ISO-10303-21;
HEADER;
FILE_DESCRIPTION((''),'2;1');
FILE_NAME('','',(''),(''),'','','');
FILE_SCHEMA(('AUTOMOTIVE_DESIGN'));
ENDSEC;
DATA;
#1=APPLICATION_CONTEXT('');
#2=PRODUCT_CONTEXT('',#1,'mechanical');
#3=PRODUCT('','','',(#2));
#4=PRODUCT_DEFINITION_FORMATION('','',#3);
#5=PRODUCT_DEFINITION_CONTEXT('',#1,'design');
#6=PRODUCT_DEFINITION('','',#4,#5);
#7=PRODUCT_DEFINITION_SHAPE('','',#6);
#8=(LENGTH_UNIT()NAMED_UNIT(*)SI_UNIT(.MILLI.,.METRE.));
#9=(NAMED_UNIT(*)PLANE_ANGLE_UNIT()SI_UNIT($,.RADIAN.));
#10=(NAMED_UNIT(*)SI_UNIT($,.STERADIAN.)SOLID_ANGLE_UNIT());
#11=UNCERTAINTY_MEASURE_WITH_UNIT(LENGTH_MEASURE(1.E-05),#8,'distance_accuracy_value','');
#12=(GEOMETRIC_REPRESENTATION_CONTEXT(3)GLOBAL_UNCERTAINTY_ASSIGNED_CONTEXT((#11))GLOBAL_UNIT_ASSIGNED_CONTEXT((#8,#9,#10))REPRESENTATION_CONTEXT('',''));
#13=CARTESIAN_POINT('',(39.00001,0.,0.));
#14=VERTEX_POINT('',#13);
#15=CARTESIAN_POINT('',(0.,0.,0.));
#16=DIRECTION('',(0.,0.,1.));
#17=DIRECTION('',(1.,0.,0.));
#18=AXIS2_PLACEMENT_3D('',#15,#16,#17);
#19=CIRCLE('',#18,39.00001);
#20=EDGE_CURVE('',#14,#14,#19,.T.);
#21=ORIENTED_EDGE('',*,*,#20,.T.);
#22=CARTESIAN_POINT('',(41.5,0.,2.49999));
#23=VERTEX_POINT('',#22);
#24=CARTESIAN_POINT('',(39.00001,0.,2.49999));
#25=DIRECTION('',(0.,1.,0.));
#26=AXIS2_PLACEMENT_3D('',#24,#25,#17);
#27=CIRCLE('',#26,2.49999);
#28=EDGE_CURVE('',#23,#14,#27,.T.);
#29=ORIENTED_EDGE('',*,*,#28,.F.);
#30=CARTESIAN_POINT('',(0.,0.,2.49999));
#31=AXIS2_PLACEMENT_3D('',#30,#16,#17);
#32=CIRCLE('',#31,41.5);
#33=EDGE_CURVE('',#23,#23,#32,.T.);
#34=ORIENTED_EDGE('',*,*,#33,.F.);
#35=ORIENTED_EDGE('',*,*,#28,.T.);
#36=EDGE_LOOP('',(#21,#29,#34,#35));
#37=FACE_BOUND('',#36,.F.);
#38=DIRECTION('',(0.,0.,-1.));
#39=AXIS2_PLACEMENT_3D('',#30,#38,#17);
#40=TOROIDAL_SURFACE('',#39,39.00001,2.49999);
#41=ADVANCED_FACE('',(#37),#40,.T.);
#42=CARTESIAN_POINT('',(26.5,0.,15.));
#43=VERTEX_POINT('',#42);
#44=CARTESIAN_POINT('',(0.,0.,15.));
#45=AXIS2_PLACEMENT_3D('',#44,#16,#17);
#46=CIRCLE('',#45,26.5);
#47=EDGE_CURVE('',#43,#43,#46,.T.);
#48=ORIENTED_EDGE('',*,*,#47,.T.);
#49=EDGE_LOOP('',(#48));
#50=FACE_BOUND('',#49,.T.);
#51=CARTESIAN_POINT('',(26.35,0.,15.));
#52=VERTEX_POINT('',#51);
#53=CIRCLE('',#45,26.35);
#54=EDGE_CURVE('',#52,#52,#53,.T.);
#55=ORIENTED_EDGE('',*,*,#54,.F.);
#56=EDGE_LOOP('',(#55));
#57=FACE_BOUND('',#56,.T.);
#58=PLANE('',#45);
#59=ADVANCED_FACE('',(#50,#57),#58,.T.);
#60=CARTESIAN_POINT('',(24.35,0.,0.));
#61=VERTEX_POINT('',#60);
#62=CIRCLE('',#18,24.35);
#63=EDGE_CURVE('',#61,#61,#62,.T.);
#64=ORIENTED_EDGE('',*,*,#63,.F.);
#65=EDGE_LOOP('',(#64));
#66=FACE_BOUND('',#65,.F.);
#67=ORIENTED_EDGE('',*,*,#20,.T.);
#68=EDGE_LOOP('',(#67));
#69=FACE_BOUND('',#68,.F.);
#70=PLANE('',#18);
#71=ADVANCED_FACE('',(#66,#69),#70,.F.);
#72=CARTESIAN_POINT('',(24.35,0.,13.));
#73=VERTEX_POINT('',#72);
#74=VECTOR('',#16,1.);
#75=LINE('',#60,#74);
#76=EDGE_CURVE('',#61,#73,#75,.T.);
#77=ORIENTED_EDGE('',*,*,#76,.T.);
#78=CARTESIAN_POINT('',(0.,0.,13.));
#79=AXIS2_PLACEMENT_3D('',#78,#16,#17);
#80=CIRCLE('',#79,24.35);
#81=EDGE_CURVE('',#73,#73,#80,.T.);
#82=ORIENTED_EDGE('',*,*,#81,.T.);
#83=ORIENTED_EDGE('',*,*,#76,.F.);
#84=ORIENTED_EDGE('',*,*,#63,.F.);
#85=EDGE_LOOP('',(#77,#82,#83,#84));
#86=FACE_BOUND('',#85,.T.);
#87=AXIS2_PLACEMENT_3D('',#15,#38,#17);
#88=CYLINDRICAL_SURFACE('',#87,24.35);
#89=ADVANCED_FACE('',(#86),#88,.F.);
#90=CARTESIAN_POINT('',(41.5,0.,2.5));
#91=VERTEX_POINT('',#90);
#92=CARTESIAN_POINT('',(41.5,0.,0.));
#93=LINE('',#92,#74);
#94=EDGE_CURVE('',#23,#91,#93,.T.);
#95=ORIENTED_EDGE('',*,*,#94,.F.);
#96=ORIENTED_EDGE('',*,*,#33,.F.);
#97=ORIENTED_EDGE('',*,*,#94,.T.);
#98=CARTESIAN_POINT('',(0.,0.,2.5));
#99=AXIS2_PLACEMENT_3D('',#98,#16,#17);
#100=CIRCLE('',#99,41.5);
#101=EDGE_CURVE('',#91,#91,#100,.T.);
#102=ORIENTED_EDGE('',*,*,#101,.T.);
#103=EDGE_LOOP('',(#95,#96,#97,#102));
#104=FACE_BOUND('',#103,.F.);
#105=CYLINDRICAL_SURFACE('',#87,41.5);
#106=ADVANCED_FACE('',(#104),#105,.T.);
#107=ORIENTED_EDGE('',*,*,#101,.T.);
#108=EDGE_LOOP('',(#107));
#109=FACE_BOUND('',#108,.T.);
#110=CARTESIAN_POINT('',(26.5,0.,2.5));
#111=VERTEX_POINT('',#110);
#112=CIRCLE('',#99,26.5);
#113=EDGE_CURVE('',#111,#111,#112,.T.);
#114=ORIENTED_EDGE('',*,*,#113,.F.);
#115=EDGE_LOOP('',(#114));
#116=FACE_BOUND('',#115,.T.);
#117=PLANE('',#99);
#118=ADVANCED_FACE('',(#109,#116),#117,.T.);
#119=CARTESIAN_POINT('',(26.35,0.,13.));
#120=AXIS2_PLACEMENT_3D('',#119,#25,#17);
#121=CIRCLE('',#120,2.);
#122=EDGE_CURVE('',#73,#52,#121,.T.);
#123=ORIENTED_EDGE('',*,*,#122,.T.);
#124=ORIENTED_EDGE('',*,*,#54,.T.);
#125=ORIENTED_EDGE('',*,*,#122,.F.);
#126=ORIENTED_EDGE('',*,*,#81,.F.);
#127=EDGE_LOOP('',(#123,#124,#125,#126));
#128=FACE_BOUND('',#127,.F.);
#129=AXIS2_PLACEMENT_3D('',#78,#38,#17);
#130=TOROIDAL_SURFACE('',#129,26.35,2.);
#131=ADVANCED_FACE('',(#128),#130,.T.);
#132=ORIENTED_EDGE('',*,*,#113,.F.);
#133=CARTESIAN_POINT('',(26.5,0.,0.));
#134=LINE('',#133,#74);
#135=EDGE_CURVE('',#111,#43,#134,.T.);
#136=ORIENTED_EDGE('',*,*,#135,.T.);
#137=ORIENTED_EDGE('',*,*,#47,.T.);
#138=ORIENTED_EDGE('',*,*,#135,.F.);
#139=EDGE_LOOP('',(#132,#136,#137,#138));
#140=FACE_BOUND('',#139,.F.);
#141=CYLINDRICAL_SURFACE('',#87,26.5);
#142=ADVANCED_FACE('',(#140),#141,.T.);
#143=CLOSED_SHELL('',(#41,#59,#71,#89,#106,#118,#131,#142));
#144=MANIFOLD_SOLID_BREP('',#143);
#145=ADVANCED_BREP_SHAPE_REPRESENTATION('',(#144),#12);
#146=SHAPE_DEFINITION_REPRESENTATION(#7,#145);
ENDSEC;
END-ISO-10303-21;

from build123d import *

# Parameters (mm, degrees)
F0_R     = 41.5
F0_R_2   = 26.5
F1_DEPTH = 2.5
F0_R_3   = 24.35
F2_DEPTH = 15
F3_R     = 2.49999
F4_R     = 2


# Not quite as in the source:
# - a fillet or chamfer is up to 0.001 mm smaller than in the source, because OpenCascade refuses the exact size


with BuildPart() as f1:
    # F0 (on Top) → F1 (new body)
    with BuildSketch(Plane.XY):
        Circle(F0_R)
        Circle(F0_R_2, mode=Mode.SUBTRACT)
    extrude(amount=F1_DEPTH)

    # F0 (on Top) → F2 (join)
    with BuildSketch(Plane.XY):
        Circle(F0_R_2)
        Circle(F0_R_3, mode=Mode.SUBTRACT)
    extrude(amount=F2_DEPTH)

    # F3 (radius 2.5 in the source; OpenCascade refuses exactly that, so slightly less here)
    f3_edges = [f1.edges().sort_by_distance(p)[0] for p in [
        (-41.5, 0, 0),
    ]]
    fillet(f3_edges, radius=F3_R)

    # F4
    f4_edges = [f1.edges().sort_by_distance(p)[0] for p in [
        (-24.35, 0, 15),
    ]]
    fillet(f4_edges, radius=F4_R)


solid = f1.part
